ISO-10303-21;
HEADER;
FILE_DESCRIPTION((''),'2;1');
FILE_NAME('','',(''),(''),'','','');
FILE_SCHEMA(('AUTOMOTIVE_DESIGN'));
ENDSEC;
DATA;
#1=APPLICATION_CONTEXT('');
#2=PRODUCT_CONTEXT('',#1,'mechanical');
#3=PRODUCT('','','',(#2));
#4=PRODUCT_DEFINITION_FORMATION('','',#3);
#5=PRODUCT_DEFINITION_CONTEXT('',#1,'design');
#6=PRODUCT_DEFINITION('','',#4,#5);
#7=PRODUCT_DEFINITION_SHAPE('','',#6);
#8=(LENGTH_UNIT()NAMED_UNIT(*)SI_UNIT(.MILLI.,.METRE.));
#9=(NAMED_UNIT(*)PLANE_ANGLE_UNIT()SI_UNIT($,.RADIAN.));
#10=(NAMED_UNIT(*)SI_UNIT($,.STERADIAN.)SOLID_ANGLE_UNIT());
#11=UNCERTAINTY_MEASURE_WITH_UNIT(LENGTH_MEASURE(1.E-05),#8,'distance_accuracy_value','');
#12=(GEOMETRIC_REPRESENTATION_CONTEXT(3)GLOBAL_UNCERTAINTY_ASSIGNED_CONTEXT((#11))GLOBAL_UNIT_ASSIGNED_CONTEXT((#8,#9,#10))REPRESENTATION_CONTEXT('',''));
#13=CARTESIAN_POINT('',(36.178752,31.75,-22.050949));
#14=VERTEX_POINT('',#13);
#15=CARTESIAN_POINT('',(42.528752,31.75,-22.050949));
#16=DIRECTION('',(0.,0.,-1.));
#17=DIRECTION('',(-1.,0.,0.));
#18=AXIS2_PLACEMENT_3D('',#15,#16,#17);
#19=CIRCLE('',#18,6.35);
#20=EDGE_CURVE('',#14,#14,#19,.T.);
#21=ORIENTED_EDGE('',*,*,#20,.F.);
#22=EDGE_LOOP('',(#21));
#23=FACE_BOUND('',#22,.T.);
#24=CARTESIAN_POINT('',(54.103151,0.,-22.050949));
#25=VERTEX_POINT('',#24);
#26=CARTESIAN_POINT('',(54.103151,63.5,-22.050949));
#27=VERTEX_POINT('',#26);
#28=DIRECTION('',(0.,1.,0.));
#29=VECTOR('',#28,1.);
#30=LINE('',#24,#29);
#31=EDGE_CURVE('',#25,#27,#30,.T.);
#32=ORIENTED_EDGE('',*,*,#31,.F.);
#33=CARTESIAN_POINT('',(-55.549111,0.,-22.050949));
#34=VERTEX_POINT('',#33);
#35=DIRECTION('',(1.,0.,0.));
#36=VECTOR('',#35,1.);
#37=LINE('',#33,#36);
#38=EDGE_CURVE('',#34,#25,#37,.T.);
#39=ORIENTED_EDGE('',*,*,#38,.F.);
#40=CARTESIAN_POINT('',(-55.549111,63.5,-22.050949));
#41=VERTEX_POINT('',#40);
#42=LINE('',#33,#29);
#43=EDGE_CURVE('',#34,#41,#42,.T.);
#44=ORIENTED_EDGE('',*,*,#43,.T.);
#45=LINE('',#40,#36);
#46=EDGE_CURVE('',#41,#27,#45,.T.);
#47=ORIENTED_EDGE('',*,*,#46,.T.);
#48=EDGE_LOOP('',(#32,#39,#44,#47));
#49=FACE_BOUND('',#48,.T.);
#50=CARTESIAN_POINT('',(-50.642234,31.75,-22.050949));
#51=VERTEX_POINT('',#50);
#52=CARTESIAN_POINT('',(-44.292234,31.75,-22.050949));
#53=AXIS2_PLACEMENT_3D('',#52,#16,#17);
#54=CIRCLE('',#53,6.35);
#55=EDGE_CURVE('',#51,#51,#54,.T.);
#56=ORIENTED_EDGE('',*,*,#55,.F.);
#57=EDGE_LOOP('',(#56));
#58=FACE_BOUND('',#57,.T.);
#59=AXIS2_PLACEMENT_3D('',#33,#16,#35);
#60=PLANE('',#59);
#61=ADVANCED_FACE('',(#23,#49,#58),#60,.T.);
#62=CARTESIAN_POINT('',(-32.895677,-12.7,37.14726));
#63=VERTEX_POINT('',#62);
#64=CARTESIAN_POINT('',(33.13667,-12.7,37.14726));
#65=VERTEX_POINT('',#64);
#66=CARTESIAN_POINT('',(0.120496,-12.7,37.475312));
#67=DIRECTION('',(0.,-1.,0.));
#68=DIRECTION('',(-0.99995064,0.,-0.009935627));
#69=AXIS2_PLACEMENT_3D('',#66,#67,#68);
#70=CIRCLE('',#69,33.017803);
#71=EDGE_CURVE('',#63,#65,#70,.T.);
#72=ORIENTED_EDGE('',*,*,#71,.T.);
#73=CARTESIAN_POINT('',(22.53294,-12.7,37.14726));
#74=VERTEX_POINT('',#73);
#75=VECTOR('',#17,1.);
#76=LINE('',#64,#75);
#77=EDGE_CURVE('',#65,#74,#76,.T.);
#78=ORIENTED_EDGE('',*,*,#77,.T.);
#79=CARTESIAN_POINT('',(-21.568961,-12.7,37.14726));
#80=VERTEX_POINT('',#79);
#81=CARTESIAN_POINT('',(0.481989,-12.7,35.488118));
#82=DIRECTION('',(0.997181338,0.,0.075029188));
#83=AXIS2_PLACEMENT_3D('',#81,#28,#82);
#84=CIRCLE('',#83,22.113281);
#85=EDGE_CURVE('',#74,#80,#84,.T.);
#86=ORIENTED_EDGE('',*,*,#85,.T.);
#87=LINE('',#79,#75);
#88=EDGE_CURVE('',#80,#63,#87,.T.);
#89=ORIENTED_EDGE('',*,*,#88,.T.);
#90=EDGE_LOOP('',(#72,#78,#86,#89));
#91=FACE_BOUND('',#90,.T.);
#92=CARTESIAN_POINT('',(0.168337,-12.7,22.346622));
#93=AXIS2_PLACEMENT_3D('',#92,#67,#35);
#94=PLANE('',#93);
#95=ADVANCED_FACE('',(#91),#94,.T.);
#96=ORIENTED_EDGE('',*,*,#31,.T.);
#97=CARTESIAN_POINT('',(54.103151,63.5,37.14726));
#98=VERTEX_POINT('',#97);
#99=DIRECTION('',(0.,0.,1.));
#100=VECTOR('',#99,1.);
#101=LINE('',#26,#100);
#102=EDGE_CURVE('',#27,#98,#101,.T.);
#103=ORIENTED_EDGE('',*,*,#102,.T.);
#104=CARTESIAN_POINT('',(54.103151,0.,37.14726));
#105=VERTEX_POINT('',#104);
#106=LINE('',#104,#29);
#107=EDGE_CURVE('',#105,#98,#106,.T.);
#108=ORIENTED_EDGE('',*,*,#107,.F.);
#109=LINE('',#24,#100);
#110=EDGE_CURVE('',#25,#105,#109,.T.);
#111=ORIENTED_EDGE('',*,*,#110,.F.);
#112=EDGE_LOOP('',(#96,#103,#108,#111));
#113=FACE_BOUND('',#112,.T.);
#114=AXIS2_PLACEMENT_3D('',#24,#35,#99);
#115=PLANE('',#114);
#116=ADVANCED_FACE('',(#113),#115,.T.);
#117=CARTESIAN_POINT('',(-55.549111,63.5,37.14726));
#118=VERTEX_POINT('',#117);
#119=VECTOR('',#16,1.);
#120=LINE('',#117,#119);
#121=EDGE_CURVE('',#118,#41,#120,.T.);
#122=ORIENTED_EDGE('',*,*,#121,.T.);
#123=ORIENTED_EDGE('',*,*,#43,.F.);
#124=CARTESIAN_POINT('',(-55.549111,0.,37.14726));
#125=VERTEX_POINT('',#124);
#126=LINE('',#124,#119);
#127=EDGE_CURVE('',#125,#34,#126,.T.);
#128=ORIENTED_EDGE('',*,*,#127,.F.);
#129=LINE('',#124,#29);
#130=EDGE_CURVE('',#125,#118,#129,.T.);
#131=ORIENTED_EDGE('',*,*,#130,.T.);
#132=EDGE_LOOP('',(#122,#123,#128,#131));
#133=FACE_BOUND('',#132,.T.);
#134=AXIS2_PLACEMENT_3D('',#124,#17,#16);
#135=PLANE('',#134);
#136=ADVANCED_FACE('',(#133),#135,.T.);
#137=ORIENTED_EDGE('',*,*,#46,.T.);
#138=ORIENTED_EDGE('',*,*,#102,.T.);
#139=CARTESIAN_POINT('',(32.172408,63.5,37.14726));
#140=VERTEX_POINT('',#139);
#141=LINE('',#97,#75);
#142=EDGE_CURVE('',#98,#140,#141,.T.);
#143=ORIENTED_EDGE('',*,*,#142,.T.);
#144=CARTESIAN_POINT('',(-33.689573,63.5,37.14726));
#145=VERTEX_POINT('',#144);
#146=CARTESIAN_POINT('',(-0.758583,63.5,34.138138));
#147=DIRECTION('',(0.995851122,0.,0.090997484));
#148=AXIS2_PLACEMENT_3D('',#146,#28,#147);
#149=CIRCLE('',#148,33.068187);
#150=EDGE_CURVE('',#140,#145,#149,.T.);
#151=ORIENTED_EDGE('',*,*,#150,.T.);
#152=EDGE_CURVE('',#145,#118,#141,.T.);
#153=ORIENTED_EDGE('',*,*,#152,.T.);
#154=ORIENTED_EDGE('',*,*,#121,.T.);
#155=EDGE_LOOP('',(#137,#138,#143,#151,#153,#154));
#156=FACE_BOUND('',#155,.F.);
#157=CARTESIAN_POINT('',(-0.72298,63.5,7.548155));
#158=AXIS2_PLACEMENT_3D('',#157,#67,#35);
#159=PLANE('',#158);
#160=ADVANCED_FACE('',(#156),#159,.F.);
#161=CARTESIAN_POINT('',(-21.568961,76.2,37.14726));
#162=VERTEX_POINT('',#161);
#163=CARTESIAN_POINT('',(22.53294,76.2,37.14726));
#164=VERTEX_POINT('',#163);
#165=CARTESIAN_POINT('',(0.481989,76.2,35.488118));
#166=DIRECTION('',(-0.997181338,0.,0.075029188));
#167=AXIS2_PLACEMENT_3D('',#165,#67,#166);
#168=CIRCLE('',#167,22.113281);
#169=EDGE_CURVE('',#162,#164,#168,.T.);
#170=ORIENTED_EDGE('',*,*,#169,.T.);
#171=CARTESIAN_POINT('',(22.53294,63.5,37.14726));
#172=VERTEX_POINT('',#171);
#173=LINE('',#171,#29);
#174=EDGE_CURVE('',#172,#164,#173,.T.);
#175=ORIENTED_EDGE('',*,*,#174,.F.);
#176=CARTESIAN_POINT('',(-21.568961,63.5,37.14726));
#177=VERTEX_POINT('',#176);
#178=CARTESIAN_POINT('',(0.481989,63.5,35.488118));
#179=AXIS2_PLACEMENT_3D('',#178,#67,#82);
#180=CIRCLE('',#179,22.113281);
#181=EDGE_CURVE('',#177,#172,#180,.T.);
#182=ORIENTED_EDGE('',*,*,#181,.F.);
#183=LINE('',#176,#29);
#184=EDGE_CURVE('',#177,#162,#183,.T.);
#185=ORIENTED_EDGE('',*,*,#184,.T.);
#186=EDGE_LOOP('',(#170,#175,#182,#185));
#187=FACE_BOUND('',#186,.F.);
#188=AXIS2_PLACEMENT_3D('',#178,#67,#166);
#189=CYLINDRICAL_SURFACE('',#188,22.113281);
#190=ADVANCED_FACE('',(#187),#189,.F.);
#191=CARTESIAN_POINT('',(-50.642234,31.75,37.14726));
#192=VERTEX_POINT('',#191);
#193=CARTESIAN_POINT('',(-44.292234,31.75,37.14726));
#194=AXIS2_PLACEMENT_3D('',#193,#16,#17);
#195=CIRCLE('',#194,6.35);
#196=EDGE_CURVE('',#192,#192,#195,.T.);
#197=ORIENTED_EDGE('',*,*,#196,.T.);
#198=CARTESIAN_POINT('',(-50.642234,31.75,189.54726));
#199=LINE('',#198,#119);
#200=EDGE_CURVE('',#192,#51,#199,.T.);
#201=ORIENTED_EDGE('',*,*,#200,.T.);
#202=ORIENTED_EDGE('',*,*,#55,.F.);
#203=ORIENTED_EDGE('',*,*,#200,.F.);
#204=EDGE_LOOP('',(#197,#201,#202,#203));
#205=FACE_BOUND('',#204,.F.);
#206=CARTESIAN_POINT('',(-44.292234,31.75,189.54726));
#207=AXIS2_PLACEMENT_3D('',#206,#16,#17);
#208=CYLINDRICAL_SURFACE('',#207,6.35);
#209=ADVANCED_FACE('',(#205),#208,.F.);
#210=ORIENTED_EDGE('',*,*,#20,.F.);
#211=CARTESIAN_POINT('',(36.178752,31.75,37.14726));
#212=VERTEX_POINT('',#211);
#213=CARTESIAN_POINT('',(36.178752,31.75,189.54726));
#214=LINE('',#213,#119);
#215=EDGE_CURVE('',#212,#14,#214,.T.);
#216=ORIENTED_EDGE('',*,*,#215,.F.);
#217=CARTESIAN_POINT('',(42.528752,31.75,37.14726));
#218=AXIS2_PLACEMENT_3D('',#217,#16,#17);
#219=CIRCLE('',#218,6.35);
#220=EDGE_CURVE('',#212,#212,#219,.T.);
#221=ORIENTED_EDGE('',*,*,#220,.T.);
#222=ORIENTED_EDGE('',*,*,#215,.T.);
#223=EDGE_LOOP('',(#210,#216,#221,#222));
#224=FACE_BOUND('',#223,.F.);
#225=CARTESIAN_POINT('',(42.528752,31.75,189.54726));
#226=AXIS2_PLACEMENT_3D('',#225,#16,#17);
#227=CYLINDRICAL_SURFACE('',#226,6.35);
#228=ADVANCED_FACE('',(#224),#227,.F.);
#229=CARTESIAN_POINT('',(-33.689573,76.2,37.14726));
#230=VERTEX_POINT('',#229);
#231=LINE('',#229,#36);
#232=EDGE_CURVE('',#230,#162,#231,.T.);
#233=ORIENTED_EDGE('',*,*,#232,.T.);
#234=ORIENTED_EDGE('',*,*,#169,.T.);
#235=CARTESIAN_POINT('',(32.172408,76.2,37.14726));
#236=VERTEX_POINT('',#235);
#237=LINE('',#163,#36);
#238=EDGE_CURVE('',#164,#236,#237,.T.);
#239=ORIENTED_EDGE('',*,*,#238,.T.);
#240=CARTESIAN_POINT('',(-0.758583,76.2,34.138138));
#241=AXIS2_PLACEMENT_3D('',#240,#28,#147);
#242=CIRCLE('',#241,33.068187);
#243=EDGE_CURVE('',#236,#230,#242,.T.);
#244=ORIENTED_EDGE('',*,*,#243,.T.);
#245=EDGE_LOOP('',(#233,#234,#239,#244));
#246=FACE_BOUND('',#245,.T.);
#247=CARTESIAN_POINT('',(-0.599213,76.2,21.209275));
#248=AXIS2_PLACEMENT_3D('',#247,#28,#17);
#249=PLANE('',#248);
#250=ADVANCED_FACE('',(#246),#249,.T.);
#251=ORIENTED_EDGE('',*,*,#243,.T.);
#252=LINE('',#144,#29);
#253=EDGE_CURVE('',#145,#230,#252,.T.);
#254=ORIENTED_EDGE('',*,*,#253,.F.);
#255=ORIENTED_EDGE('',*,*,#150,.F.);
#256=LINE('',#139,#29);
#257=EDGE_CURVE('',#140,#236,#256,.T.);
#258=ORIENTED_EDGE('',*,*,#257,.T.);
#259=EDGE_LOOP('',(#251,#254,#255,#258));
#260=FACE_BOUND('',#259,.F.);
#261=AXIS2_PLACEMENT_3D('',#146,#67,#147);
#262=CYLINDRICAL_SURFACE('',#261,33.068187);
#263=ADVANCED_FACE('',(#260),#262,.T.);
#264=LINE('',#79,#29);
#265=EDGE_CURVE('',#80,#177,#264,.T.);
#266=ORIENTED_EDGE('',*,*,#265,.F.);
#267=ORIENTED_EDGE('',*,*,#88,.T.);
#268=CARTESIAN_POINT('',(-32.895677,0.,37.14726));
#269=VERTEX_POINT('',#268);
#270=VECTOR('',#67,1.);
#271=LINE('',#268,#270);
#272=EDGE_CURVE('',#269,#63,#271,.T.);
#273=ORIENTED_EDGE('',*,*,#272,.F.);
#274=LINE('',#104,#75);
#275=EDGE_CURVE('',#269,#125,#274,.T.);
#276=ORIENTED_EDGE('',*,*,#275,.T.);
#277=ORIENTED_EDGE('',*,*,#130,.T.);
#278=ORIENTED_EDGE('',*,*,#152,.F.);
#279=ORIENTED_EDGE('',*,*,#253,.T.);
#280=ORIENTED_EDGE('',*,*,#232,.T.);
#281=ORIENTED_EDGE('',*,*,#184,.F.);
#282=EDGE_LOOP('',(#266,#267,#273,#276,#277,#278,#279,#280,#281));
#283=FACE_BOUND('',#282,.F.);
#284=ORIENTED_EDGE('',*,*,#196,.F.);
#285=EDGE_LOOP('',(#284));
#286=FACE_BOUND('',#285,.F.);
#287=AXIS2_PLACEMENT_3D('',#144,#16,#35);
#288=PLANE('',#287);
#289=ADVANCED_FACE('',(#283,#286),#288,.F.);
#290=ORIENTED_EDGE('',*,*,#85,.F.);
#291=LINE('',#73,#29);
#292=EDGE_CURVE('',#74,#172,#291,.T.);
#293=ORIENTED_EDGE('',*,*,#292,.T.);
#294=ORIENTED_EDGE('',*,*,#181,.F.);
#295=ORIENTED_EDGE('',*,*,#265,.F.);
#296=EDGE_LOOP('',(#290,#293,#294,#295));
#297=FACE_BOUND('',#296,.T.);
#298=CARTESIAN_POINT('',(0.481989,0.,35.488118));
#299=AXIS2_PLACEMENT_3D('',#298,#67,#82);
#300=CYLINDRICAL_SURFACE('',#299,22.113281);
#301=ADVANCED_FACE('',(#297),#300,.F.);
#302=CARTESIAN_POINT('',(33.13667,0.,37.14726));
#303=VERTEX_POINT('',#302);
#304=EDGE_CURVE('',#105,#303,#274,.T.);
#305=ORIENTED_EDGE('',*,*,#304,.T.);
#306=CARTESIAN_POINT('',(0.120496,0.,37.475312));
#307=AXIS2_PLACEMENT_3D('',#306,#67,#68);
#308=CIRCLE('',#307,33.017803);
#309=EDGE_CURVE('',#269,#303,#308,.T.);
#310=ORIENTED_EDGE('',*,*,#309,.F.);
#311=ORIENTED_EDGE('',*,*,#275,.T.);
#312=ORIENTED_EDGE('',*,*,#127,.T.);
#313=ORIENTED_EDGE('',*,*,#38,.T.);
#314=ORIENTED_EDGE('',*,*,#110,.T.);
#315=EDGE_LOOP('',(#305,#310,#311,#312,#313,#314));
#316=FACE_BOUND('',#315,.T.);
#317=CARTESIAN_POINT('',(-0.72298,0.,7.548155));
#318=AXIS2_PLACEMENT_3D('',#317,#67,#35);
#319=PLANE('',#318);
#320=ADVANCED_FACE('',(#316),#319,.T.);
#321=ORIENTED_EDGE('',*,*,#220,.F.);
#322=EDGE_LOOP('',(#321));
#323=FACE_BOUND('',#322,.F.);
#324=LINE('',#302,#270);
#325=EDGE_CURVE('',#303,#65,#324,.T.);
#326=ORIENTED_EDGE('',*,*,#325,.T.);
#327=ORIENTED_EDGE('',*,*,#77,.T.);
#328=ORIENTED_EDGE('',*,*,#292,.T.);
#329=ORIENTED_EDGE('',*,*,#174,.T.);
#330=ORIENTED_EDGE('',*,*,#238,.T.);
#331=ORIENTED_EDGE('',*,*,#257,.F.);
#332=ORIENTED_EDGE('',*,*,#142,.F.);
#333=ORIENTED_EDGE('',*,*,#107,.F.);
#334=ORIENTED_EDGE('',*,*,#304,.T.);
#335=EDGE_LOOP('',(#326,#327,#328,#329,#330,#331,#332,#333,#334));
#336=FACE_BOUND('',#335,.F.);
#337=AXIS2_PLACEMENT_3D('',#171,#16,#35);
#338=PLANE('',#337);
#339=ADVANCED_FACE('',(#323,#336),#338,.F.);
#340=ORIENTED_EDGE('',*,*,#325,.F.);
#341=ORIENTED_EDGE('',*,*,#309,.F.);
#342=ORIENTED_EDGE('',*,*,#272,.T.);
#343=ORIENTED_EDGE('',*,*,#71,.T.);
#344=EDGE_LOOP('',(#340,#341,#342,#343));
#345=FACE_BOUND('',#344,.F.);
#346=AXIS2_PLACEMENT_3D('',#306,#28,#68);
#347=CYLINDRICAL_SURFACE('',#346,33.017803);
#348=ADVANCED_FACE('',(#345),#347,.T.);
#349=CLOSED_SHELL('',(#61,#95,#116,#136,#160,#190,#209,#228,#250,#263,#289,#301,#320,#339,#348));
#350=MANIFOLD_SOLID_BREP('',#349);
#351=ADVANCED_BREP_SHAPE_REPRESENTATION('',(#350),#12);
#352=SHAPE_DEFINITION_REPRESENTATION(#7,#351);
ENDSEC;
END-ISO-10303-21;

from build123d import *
from build123d import SkipClean  # not in build123d's __all__

# Parameters (mm, degrees)
F1_DEPTH = 63.5
F3_DEPTH = 12.7
F4_DEPTH = 63.501
F6_DEPTH = 12.7
F8_D     = 12.7
F8_DEPTH = 152.4
F8_TIP   = 3.8154649308


# Not quite as in the source:
# - after a boolean that leaves OpenCascade's solid faulty, fix() repairs it


with BuildPart() as f1:
    # F0 (on Front) → F1 (new body)
    with BuildSketch(Plane.XZ):
        Polygon((-29.9473897851, 37.1472596026), (-42.7499328044, 37.1472596026), (-55.5491112173, 37.1472596026), (-55.5491112173, -22.0509488136), (54.1031509638, -22.0509488136), (54.1031509638, 37.1472596026), (41.2416318434, 37.1472596026), (28.4390888242, 37.1472596026), (20.3639920801, 37.1472596026), (-23.0149235576, 37.1472596026), align=None)
    extrude(amount=-F1_DEPTH)

    # F2 (on face) → F3 (join)
    with BuildSketch(Plane.XZ):
        with BuildLine():
            Line((-21.5689614415, 37.1472596026), (-32.8956767917, 37.1472596026))
            ThreePointArc((-32.8956767917, 37.1472596026), (0.1204963773, 4.4575092605), (33.1366695464, 37.1472596026))
            Line((33.1366695464, 37.1472596026), (22.5329399109, 37.1472596026))
            ThreePointArc((22.5329399109, 37.1472596026), (0.4819892347, 13.3748375843), (-21.5689614415, 37.1472596026))
        make_face()
    extrude(amount=F3_DEPTH)

    # F4 (cut, through all): a face of the model
    f4_faces = [f1.faces().sort_by_distance(p)[0] for p in [
        (0.4819892347, 0, 26.9928771395),
    ]]
    extrude(f4_faces, amount=-F4_DEPTH, mode=Mode.SUBTRACT)

    # F5 (on face) → F6 (join)
    with BuildSketch(Plane(origin=(0, 63.5, 0), x_dir=(-1, 0, 0), z_dir=(0, 1, 0))):
        with BuildLine():
            Line((-22.5329399109, 37.1472596026), (-32.1724079549, 37.1472596026))
            ThreePointArc((-32.1724079549, 37.1472596026), (0.7585827261, 1.0699512778), (33.6895734072, 37.1472596026))
            Line((33.6895734072, 37.1472596026), (21.5689614415, 37.1472596026))
            ThreePointArc((21.5689614415, 37.1472596026), (-0.4819892347, 13.3748375843), (-22.5329399109, 37.1472596026))
        make_face()
    with SkipClean():  # cleaning this boolean's faces spoils the solid; the shape is the same uncleaned
        extrude(amount=F6_DEPTH)

    # F8
    with Locations(Plane.XY.offset(37.1472596026)):
        with Locations((-44.2922338843, 31.75), (42.5287522376, 31.75)):
            Hole(F8_D / 2, depth=F8_DEPTH)
            with Locations((0, 0, -(F8_DEPTH + F8_TIP / 2))):  # 118° drill point
                Cone(0, F8_D / 2, F8_TIP, mode=Mode.SUBTRACT)

    add(f1.part.fix(), mode=Mode.REPLACE)


solid = f1.part
